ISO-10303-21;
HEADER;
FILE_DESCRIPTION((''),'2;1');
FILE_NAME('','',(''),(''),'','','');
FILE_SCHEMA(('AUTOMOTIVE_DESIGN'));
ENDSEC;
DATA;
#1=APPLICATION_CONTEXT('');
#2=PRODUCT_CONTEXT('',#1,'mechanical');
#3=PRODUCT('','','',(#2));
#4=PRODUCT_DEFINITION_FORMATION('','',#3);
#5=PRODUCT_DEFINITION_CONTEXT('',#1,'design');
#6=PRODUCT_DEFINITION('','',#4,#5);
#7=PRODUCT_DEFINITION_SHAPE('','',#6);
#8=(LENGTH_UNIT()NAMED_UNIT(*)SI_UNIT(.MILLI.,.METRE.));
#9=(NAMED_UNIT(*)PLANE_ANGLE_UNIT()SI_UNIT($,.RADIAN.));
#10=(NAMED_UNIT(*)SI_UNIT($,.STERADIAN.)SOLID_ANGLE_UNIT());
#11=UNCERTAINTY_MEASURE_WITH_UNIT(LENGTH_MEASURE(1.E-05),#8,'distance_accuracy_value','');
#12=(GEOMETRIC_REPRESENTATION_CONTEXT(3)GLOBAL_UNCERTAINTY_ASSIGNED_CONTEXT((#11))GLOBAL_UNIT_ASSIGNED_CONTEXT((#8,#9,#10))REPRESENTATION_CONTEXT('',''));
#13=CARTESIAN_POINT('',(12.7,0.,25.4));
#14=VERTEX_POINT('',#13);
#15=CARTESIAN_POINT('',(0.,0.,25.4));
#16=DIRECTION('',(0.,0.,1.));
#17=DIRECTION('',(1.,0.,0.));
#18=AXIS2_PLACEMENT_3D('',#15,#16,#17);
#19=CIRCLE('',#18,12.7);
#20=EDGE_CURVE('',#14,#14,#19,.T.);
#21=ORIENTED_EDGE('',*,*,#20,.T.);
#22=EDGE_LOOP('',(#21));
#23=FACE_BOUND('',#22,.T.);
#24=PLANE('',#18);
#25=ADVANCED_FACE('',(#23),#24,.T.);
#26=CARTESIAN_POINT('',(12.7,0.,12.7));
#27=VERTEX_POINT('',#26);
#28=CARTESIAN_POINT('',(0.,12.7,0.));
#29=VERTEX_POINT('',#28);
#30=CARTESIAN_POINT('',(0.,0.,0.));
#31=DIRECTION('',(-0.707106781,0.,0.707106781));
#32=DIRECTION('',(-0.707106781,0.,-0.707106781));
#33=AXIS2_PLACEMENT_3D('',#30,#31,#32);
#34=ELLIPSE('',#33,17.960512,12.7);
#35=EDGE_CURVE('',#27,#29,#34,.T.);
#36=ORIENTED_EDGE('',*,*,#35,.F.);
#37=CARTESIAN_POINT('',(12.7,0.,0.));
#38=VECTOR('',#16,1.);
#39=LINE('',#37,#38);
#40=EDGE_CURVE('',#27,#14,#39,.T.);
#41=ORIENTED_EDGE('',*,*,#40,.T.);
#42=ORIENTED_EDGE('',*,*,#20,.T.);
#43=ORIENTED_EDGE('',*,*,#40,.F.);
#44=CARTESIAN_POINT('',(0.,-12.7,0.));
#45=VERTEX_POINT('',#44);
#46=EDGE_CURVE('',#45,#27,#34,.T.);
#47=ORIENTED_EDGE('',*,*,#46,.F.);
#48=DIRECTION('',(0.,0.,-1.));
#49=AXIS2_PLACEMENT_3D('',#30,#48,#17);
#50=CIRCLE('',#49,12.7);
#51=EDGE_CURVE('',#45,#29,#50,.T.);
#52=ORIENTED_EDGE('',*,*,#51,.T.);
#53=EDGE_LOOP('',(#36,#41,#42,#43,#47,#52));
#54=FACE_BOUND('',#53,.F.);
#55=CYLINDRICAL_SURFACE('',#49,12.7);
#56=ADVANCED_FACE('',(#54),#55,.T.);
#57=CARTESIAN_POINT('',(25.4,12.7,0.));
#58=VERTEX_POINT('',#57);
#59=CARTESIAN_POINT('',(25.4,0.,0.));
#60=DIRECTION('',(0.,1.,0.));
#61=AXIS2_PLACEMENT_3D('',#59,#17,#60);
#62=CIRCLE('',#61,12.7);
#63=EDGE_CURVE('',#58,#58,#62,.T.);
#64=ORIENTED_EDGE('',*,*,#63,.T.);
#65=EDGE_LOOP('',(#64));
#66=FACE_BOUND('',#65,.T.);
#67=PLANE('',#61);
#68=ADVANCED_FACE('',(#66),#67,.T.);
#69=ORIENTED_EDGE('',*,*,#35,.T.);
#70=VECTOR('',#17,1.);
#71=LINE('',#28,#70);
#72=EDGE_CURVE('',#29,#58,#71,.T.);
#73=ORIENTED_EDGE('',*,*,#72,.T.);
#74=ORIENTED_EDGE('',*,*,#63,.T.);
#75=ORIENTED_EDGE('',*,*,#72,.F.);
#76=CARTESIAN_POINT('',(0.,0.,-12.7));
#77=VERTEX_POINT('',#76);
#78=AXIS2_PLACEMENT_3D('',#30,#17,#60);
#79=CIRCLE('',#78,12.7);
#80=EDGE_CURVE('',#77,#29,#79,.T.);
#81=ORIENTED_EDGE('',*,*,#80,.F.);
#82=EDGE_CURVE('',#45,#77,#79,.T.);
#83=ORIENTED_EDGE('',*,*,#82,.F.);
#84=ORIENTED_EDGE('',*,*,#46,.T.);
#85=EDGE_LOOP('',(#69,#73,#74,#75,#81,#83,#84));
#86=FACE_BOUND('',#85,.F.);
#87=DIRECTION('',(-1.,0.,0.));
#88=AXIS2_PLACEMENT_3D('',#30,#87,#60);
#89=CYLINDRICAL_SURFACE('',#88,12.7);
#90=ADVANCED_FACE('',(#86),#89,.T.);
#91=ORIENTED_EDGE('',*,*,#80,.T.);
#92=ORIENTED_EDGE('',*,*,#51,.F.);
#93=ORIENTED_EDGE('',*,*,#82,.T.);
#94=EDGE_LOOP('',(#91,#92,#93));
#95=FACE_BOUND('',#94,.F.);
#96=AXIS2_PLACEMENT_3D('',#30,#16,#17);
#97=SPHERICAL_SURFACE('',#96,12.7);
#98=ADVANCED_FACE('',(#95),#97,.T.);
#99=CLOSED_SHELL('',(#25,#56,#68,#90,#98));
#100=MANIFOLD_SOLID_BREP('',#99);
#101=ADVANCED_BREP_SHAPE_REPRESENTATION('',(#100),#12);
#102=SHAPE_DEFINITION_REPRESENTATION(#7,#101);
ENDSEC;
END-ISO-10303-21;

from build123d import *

# Parameters (mm, degrees)
F2_R     = 12.7
F3_DEPTH = 25.4
F7_R     = 12.7
F8_DEPTH = 25.4


# Not quite as in the source:
# - the program builds the solid bodies; features that only make, move or delete a surface that nothing else refers to are left out


with BuildPart() as f1:
    # F0 (on Front) → F1 (revolve)
    with BuildSketch(Plane.XZ):
        with BuildLine():
            ThreePointArc((0, -12.7), (8.9802561211, -8.9802561211), (12.7, 0))
            ThreePointArc((12.7, 0), (8.9802561211, 8.9802561211), (0, 12.7))
            Line((0, 12.7), (0, -12.7))
        make_face()
    revolve(axis=Axis((0, 0, -1.3322243467), (0, 0, -1)))

    # F2 (on Right) → F3 (join)
    with BuildSketch(Plane.YZ):
        Circle(F2_R)
    extrude(amount=F3_DEPTH)

    # F7 (on Top) → F8 (join)
    with BuildSketch(Plane.XY):
        Circle(F7_R)
    extrude(amount=F8_DEPTH)


solid = f1.part
